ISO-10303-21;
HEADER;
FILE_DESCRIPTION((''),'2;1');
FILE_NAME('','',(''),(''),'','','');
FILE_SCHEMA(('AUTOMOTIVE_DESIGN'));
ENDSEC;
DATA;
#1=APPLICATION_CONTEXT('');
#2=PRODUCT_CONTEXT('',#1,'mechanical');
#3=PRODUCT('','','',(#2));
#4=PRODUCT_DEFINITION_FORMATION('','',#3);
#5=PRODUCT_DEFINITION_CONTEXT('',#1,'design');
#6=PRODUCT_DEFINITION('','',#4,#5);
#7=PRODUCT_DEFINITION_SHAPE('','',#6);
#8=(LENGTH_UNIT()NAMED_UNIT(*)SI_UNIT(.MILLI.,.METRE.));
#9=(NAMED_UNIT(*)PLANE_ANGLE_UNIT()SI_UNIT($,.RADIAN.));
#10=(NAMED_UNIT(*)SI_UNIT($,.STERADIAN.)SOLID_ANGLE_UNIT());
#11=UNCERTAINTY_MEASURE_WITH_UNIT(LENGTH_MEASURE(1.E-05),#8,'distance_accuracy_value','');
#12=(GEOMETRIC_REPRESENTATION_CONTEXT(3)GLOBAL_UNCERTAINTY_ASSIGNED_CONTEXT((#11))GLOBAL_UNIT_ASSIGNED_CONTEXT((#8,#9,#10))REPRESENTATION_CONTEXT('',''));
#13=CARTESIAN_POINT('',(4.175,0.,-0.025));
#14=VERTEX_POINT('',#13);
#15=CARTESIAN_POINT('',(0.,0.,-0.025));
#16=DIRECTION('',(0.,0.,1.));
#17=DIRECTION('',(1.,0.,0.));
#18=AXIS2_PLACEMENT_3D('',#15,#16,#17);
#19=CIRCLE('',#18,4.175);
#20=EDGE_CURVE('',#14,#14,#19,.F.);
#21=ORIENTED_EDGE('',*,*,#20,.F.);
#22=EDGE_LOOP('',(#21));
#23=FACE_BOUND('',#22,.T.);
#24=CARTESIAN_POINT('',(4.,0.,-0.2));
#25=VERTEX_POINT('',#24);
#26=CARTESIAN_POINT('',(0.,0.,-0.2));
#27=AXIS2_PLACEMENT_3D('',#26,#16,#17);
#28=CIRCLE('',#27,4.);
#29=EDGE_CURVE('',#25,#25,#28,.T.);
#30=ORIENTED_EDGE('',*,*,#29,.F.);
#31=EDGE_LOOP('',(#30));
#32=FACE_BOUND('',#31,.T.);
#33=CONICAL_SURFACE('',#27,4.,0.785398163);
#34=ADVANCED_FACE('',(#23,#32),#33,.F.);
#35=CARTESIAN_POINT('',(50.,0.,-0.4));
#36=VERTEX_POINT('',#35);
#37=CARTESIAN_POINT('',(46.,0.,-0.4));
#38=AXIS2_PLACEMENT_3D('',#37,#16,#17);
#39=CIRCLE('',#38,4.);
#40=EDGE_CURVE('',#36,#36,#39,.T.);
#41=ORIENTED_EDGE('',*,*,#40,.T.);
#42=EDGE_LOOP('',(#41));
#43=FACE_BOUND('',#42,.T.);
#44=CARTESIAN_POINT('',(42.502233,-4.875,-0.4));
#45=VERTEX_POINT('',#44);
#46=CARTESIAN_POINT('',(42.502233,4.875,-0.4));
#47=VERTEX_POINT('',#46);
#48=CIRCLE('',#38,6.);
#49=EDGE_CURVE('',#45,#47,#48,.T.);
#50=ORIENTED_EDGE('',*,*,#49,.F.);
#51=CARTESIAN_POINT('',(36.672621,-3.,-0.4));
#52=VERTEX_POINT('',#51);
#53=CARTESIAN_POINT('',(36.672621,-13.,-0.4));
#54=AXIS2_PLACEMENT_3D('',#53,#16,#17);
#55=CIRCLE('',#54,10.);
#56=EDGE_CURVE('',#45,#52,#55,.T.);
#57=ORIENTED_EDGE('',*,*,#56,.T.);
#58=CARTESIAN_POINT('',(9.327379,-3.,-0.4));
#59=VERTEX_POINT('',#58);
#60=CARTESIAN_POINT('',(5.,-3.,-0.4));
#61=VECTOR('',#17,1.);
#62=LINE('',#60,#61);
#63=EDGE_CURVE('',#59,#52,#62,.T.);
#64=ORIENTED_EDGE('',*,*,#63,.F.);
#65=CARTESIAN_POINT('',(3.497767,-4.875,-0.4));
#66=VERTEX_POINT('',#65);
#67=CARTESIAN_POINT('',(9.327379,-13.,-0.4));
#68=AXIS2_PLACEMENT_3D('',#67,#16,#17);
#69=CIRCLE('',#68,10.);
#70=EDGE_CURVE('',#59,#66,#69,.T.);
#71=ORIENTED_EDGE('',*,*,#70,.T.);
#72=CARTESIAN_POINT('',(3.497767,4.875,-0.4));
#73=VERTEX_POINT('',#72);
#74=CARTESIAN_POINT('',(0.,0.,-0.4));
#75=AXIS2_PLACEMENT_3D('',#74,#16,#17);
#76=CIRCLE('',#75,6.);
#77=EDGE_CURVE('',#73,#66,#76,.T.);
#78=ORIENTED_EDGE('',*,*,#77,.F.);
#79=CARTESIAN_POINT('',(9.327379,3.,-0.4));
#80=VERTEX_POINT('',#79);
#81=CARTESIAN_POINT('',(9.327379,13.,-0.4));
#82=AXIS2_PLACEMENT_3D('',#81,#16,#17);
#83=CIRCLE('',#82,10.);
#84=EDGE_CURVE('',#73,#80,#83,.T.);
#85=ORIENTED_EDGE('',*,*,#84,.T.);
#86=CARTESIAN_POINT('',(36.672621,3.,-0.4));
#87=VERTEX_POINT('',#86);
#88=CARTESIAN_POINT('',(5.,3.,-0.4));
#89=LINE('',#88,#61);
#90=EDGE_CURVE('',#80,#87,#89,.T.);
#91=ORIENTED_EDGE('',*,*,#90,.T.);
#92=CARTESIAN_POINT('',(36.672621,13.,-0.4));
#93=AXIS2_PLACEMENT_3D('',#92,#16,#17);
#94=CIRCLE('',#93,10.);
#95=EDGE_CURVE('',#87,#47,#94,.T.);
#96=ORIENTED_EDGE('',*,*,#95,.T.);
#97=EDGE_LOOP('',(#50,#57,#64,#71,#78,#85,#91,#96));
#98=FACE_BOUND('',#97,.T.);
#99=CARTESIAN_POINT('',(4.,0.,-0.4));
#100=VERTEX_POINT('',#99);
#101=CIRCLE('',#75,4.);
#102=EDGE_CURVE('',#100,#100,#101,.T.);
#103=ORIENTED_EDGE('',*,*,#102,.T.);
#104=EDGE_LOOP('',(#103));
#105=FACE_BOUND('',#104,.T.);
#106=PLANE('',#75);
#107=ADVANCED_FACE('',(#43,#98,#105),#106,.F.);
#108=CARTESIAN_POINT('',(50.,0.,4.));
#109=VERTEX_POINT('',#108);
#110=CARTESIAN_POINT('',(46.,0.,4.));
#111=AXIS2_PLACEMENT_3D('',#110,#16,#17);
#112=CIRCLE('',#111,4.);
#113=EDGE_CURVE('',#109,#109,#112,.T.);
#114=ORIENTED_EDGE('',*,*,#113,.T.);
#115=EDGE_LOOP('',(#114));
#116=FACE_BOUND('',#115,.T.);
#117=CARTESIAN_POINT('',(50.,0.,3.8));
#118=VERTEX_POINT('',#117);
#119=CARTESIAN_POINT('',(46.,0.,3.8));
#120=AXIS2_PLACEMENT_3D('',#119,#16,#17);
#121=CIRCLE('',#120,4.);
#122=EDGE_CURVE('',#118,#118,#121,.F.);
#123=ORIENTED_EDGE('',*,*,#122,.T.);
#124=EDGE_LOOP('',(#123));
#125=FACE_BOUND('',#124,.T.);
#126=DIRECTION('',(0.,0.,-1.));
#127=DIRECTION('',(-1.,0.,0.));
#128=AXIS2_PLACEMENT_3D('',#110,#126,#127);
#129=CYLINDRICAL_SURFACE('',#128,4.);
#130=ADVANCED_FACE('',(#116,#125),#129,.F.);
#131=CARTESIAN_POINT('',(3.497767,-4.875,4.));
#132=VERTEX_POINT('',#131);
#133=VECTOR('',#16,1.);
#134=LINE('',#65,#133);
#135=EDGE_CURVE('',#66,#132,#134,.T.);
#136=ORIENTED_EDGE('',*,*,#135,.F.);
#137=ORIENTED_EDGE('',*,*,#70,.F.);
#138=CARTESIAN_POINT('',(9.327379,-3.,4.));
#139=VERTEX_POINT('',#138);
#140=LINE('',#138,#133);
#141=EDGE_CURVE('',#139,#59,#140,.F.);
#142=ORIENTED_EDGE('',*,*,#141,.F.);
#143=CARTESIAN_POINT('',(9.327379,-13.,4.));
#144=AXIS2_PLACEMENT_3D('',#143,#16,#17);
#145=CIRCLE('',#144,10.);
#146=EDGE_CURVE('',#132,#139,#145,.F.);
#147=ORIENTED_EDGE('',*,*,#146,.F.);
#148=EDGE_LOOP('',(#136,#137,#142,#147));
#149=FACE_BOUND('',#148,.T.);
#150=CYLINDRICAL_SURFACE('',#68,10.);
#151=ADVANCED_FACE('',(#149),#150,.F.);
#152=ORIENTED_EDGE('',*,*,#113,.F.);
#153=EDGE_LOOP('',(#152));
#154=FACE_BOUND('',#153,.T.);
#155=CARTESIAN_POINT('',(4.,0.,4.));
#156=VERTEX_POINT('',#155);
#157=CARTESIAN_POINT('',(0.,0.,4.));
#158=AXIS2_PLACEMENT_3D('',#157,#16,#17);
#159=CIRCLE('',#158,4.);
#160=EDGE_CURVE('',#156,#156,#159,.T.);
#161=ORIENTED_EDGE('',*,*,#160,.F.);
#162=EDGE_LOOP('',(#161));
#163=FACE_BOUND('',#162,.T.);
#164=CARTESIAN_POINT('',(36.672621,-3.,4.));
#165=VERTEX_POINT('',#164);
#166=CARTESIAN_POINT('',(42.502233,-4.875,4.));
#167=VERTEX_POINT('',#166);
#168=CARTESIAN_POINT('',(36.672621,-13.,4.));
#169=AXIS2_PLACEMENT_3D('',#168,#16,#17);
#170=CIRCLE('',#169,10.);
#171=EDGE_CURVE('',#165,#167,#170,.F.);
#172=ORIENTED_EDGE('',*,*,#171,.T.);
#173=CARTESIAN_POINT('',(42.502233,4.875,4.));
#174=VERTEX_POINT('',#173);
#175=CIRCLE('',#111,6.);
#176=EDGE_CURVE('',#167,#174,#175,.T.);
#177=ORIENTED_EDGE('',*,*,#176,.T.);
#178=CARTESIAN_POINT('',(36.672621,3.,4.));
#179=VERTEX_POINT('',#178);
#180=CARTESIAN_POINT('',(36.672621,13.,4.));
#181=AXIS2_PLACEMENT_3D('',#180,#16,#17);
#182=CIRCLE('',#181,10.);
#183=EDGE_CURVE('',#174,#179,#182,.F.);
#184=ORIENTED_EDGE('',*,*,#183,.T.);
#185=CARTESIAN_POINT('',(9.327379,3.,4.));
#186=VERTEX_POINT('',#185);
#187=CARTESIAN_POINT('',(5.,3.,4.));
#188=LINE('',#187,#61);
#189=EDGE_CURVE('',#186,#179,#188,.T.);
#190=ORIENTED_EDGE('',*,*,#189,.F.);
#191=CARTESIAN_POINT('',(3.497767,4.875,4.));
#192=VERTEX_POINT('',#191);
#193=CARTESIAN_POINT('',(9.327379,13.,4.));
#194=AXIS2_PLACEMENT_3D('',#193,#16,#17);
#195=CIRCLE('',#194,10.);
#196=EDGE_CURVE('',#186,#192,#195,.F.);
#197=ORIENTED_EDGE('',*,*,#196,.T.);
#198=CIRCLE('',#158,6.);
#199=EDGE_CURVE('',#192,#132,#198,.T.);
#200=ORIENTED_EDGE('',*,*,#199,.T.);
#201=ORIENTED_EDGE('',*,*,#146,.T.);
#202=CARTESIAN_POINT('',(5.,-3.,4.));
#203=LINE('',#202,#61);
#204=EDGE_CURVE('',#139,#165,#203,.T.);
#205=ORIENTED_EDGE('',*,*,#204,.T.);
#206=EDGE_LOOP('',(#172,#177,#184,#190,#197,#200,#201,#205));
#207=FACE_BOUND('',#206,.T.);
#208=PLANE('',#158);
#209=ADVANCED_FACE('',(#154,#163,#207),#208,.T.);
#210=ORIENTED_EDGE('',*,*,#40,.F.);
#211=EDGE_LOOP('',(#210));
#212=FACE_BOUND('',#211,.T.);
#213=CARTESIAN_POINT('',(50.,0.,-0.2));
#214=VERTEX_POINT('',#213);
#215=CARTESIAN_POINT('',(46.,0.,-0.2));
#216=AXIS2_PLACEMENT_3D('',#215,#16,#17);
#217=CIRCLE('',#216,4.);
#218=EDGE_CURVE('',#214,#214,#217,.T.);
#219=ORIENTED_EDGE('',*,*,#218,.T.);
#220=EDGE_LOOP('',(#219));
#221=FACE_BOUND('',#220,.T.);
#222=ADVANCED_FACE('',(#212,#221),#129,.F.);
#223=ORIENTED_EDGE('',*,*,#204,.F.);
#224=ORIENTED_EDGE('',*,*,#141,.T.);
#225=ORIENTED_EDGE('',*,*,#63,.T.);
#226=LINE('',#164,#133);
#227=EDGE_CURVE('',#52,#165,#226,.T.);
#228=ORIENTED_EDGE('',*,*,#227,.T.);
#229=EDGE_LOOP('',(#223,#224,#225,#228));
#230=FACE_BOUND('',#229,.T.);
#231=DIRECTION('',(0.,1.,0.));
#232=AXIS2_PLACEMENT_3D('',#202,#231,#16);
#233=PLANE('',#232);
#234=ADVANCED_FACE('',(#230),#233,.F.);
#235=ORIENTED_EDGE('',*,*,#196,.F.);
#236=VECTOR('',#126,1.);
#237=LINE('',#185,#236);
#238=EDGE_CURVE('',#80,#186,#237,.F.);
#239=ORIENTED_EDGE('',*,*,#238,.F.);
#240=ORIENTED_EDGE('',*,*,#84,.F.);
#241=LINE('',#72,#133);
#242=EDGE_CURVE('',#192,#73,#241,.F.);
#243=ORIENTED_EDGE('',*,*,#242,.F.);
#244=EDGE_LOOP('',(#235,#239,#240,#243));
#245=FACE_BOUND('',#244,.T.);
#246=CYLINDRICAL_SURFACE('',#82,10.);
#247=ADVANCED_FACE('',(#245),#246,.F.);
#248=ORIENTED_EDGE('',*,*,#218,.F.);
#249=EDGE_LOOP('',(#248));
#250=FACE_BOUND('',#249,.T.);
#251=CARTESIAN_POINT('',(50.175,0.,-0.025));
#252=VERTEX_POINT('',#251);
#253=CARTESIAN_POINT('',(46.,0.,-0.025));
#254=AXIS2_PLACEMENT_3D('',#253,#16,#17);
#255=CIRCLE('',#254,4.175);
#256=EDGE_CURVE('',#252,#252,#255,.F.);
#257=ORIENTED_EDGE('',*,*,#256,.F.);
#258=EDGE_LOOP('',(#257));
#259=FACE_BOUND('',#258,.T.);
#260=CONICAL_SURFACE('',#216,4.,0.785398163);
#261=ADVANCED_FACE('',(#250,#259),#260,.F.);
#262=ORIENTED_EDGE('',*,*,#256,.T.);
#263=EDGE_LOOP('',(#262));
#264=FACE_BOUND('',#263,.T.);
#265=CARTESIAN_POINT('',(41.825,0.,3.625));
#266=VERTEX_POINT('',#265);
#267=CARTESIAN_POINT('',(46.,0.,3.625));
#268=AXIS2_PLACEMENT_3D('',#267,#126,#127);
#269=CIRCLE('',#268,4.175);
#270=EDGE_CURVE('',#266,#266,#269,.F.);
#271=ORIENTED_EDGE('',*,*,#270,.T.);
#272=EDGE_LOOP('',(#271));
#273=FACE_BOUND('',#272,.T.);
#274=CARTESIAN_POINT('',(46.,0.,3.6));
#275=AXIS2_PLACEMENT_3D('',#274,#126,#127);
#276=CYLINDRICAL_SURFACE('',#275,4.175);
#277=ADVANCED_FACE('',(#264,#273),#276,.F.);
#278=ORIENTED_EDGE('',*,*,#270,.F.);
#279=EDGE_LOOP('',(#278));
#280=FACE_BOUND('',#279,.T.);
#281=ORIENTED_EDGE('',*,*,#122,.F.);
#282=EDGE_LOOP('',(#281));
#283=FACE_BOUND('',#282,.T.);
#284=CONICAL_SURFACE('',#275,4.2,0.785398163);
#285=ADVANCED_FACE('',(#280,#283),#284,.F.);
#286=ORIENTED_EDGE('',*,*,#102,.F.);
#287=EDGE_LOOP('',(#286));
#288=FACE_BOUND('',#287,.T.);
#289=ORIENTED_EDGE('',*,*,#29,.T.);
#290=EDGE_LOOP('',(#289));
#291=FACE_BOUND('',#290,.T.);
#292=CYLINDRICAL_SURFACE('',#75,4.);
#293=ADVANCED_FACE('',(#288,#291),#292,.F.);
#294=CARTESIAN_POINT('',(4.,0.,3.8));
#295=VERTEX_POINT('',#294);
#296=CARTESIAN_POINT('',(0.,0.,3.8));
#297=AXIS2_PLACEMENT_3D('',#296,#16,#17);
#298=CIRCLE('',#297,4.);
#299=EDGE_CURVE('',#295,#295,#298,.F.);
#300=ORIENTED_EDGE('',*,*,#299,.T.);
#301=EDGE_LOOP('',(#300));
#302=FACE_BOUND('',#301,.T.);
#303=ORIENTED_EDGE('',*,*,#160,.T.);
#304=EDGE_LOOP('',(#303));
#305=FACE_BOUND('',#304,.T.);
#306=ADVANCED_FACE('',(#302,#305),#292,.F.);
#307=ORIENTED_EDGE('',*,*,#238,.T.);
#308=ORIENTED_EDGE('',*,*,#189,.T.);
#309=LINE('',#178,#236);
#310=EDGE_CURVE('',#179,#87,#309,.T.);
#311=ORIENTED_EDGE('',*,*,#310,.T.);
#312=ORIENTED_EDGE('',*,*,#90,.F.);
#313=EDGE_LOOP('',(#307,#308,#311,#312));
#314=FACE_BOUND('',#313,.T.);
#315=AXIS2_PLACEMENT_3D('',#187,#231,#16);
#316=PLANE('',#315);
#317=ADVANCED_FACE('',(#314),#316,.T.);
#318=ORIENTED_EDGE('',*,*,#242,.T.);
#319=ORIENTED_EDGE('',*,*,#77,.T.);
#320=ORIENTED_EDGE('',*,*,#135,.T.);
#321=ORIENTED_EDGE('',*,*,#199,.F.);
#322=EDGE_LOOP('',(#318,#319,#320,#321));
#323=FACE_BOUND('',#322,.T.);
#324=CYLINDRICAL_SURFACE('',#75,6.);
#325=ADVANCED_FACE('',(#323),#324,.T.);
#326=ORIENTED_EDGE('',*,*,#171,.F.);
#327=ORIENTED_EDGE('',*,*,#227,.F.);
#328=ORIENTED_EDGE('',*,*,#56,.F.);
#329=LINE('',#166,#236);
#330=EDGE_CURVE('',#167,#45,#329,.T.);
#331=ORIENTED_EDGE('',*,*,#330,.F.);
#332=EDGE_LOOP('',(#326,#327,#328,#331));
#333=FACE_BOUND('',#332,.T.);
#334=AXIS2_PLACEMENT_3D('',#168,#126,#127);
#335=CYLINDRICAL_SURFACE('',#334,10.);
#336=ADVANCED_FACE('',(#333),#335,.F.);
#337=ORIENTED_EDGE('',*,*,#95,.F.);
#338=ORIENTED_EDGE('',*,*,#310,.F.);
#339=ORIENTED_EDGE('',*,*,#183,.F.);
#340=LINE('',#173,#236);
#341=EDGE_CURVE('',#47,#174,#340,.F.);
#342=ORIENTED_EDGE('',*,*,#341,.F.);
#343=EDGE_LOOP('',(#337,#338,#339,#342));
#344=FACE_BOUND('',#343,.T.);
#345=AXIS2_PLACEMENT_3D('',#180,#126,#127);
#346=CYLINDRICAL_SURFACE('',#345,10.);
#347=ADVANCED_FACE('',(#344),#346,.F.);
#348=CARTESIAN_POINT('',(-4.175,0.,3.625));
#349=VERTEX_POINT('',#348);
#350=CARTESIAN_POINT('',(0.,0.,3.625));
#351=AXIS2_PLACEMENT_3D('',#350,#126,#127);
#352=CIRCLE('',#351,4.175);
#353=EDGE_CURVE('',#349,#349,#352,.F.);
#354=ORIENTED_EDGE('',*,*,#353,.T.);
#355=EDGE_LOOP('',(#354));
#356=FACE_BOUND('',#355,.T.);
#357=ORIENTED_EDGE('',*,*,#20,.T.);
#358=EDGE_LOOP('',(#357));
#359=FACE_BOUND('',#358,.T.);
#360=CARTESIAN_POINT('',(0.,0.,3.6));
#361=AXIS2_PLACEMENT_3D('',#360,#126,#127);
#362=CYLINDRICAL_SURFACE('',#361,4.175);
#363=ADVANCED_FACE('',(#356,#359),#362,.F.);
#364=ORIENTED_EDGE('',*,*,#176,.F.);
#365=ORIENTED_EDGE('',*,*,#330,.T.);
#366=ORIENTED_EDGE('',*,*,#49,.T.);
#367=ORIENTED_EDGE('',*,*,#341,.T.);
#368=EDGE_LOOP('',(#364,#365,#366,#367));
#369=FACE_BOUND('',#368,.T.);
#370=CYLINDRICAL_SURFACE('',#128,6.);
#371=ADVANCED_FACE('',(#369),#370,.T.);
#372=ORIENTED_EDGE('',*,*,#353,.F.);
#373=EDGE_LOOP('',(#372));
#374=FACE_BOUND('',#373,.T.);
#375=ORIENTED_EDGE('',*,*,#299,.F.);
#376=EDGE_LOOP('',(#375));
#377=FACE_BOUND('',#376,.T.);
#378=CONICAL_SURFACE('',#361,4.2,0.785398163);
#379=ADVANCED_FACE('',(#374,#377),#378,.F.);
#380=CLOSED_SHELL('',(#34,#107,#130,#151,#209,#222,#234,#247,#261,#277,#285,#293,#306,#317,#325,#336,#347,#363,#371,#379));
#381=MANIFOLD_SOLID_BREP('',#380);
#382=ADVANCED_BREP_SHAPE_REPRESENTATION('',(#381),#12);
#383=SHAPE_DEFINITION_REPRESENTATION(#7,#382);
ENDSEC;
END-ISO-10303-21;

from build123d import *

# Parameters (mm, degrees)
EXTRUDE_1_DEPTH      = 4
EXTRUDE_1_DEPTH_BACK = 0.4
SKETCH_1_R           = 4
SKETCH_1_3_R         = 4.175
SKETCH_1_3_R_2       = 4
CUT_EXTRUDE_1_DEPTH  = 3.6
CHAMFER_1_SIZE       = 0.2
FILLET_1_R           = 10


with BuildPart() as part:
    # 草图1 → 凸台-拉伸1 (new, two sides: drawn at the far end of the back side and taken through both)
    with BuildSketch(Plane.XY.offset(-EXTRUDE_1_DEPTH_BACK)):
        with BuildLine():
            ThreePointArc((5.196152423, 3), (-6, 0), (5.196152423, -3))
            Line((5.196152423, -3), (40.803847577, -3))
            ThreePointArc((40.803847577, -3), (52, 0), (40.803847577, 3))
            Line((40.803847577, 3), (5.196152423, 3))
        make_face()
        Circle(SKETCH_1_R, mode=Mode.SUBTRACT)
        with Locations((46, 0)):
            Circle(SKETCH_1_R, mode=Mode.SUBTRACT)
    extrude(amount=EXTRUDE_1_DEPTH + EXTRUDE_1_DEPTH_BACK)

    # 草图1<3> → 切除-拉伸1 (cut)
    # profile 1 of 2: a face of its own
    with BuildSketch(Plane.XY):
        Circle(SKETCH_1_3_R)
        Circle(SKETCH_1_3_R_2, mode=Mode.SUBTRACT)
    # profile 2 of 2: a face of its own
    with BuildSketch(Plane.XY):
        with Locations((46, 0)):
            Circle(SKETCH_1_3_R)
        with Locations((46, 0)):
            Circle(SKETCH_1_3_R_2, mode=Mode.SUBTRACT)
    extrude(amount=CUT_EXTRUDE_1_DEPTH, mode=Mode.SUBTRACT)

    # 倒角1
    # the kernel refuses this chamfer: 0.2 mm, written as the material it takes off along each edge
    with BuildSketch(Plane(origin=(0, 0, 3.6), x_dir=(1, 0, 0), z_dir=(0, -1, 0))) as chamfer_1_piece_1_section:
        Polygon((4, CHAMFER_1_SIZE), (4 + CHAMFER_1_SIZE, 0), (4, 0), align=None)
    chamfer_1_piece_1 = revolve(axis=Axis((0, 0, 3.6), (0, 0, 1)), mode=Mode.PRIVATE)
    chamfer_1_piece_1 = chamfer_1_piece_1 & Plane(origin=(0, 0, 3.709543273), x_dir=(1, 0, 0), z_dir=(0, 0, -1)) * Cylinder(4.175, 17, mode=Mode.PRIVATE)
    add(chamfer_1_piece_1, mode=Mode.SUBTRACT)
    with BuildSketch(Plane(origin=(46, 0, 3.6), x_dir=(1, 0, 0), z_dir=(0, -1, 0))) as chamfer_1_piece_2_section:
        Polygon((4, CHAMFER_1_SIZE), (4 + CHAMFER_1_SIZE, 0), (4, 0), align=None)
    chamfer_1_piece_2 = revolve(axis=Axis((46, 0, 3.6), (0, 0, 1)), mode=Mode.PRIVATE)
    chamfer_1_piece_2 = chamfer_1_piece_2 & Plane(origin=(46, 0, 3.709543273), x_dir=(1, 0, 0), z_dir=(0, 0, -1)) * Cylinder(4.175, 17, mode=Mode.PRIVATE)
    add(chamfer_1_piece_2, mode=Mode.SUBTRACT)
    with BuildSketch(Plane(origin=(46, 0, 0), x_dir=(1, 0, 0), z_dir=(0, -1, 0))) as chamfer_1_piece_3_section:
        Polygon((4, -CHAMFER_1_SIZE), (4 + CHAMFER_1_SIZE, 0), (4, 0), align=None)
    chamfer_1_piece_3 = revolve(axis=Axis((46, 0, 0), (0, 0, 1)), mode=Mode.PRIVATE)
    chamfer_1_piece_3 = chamfer_1_piece_3 & Plane(origin=(46, 0, -0.109543273), x_dir=(1, 0, 0), z_dir=(0, 0, -1)) * Cylinder(4.175, 17, mode=Mode.PRIVATE)
    add(chamfer_1_piece_3, mode=Mode.SUBTRACT)
    with BuildSketch(Plane(origin=(0, 0, 0), x_dir=(1, 0, 0), z_dir=(0, -1, 0))) as chamfer_1_piece_4_section:
        Polygon((4, -CHAMFER_1_SIZE), (4 + CHAMFER_1_SIZE, 0), (4, 0), align=None)
    chamfer_1_piece_4 = revolve(axis=Axis((0, 0, 0), (0, 0, 1)), mode=Mode.PRIVATE)
    chamfer_1_piece_4 = chamfer_1_piece_4 & Plane(origin=(0, 0, -0.109543273), x_dir=(1, 0, 0), z_dir=(0, 0, -1)) * Cylinder(4.175, 17, mode=Mode.PRIVATE)
    add(chamfer_1_piece_4, mode=Mode.SUBTRACT)

    # 圆角1
    fillet_1_edges = [part.edges().sort_by_distance(p)[0] for p in [
        (5.196152423, -3, 1.8),
        (5.196152423, 3, 1.8),
        (40.803847577, 3, 1.8),
        (40.803847577, -3, 1.8),
    ]]
    fillet(fillet_1_edges, radius=FILLET_1_R)


solid = part.part
